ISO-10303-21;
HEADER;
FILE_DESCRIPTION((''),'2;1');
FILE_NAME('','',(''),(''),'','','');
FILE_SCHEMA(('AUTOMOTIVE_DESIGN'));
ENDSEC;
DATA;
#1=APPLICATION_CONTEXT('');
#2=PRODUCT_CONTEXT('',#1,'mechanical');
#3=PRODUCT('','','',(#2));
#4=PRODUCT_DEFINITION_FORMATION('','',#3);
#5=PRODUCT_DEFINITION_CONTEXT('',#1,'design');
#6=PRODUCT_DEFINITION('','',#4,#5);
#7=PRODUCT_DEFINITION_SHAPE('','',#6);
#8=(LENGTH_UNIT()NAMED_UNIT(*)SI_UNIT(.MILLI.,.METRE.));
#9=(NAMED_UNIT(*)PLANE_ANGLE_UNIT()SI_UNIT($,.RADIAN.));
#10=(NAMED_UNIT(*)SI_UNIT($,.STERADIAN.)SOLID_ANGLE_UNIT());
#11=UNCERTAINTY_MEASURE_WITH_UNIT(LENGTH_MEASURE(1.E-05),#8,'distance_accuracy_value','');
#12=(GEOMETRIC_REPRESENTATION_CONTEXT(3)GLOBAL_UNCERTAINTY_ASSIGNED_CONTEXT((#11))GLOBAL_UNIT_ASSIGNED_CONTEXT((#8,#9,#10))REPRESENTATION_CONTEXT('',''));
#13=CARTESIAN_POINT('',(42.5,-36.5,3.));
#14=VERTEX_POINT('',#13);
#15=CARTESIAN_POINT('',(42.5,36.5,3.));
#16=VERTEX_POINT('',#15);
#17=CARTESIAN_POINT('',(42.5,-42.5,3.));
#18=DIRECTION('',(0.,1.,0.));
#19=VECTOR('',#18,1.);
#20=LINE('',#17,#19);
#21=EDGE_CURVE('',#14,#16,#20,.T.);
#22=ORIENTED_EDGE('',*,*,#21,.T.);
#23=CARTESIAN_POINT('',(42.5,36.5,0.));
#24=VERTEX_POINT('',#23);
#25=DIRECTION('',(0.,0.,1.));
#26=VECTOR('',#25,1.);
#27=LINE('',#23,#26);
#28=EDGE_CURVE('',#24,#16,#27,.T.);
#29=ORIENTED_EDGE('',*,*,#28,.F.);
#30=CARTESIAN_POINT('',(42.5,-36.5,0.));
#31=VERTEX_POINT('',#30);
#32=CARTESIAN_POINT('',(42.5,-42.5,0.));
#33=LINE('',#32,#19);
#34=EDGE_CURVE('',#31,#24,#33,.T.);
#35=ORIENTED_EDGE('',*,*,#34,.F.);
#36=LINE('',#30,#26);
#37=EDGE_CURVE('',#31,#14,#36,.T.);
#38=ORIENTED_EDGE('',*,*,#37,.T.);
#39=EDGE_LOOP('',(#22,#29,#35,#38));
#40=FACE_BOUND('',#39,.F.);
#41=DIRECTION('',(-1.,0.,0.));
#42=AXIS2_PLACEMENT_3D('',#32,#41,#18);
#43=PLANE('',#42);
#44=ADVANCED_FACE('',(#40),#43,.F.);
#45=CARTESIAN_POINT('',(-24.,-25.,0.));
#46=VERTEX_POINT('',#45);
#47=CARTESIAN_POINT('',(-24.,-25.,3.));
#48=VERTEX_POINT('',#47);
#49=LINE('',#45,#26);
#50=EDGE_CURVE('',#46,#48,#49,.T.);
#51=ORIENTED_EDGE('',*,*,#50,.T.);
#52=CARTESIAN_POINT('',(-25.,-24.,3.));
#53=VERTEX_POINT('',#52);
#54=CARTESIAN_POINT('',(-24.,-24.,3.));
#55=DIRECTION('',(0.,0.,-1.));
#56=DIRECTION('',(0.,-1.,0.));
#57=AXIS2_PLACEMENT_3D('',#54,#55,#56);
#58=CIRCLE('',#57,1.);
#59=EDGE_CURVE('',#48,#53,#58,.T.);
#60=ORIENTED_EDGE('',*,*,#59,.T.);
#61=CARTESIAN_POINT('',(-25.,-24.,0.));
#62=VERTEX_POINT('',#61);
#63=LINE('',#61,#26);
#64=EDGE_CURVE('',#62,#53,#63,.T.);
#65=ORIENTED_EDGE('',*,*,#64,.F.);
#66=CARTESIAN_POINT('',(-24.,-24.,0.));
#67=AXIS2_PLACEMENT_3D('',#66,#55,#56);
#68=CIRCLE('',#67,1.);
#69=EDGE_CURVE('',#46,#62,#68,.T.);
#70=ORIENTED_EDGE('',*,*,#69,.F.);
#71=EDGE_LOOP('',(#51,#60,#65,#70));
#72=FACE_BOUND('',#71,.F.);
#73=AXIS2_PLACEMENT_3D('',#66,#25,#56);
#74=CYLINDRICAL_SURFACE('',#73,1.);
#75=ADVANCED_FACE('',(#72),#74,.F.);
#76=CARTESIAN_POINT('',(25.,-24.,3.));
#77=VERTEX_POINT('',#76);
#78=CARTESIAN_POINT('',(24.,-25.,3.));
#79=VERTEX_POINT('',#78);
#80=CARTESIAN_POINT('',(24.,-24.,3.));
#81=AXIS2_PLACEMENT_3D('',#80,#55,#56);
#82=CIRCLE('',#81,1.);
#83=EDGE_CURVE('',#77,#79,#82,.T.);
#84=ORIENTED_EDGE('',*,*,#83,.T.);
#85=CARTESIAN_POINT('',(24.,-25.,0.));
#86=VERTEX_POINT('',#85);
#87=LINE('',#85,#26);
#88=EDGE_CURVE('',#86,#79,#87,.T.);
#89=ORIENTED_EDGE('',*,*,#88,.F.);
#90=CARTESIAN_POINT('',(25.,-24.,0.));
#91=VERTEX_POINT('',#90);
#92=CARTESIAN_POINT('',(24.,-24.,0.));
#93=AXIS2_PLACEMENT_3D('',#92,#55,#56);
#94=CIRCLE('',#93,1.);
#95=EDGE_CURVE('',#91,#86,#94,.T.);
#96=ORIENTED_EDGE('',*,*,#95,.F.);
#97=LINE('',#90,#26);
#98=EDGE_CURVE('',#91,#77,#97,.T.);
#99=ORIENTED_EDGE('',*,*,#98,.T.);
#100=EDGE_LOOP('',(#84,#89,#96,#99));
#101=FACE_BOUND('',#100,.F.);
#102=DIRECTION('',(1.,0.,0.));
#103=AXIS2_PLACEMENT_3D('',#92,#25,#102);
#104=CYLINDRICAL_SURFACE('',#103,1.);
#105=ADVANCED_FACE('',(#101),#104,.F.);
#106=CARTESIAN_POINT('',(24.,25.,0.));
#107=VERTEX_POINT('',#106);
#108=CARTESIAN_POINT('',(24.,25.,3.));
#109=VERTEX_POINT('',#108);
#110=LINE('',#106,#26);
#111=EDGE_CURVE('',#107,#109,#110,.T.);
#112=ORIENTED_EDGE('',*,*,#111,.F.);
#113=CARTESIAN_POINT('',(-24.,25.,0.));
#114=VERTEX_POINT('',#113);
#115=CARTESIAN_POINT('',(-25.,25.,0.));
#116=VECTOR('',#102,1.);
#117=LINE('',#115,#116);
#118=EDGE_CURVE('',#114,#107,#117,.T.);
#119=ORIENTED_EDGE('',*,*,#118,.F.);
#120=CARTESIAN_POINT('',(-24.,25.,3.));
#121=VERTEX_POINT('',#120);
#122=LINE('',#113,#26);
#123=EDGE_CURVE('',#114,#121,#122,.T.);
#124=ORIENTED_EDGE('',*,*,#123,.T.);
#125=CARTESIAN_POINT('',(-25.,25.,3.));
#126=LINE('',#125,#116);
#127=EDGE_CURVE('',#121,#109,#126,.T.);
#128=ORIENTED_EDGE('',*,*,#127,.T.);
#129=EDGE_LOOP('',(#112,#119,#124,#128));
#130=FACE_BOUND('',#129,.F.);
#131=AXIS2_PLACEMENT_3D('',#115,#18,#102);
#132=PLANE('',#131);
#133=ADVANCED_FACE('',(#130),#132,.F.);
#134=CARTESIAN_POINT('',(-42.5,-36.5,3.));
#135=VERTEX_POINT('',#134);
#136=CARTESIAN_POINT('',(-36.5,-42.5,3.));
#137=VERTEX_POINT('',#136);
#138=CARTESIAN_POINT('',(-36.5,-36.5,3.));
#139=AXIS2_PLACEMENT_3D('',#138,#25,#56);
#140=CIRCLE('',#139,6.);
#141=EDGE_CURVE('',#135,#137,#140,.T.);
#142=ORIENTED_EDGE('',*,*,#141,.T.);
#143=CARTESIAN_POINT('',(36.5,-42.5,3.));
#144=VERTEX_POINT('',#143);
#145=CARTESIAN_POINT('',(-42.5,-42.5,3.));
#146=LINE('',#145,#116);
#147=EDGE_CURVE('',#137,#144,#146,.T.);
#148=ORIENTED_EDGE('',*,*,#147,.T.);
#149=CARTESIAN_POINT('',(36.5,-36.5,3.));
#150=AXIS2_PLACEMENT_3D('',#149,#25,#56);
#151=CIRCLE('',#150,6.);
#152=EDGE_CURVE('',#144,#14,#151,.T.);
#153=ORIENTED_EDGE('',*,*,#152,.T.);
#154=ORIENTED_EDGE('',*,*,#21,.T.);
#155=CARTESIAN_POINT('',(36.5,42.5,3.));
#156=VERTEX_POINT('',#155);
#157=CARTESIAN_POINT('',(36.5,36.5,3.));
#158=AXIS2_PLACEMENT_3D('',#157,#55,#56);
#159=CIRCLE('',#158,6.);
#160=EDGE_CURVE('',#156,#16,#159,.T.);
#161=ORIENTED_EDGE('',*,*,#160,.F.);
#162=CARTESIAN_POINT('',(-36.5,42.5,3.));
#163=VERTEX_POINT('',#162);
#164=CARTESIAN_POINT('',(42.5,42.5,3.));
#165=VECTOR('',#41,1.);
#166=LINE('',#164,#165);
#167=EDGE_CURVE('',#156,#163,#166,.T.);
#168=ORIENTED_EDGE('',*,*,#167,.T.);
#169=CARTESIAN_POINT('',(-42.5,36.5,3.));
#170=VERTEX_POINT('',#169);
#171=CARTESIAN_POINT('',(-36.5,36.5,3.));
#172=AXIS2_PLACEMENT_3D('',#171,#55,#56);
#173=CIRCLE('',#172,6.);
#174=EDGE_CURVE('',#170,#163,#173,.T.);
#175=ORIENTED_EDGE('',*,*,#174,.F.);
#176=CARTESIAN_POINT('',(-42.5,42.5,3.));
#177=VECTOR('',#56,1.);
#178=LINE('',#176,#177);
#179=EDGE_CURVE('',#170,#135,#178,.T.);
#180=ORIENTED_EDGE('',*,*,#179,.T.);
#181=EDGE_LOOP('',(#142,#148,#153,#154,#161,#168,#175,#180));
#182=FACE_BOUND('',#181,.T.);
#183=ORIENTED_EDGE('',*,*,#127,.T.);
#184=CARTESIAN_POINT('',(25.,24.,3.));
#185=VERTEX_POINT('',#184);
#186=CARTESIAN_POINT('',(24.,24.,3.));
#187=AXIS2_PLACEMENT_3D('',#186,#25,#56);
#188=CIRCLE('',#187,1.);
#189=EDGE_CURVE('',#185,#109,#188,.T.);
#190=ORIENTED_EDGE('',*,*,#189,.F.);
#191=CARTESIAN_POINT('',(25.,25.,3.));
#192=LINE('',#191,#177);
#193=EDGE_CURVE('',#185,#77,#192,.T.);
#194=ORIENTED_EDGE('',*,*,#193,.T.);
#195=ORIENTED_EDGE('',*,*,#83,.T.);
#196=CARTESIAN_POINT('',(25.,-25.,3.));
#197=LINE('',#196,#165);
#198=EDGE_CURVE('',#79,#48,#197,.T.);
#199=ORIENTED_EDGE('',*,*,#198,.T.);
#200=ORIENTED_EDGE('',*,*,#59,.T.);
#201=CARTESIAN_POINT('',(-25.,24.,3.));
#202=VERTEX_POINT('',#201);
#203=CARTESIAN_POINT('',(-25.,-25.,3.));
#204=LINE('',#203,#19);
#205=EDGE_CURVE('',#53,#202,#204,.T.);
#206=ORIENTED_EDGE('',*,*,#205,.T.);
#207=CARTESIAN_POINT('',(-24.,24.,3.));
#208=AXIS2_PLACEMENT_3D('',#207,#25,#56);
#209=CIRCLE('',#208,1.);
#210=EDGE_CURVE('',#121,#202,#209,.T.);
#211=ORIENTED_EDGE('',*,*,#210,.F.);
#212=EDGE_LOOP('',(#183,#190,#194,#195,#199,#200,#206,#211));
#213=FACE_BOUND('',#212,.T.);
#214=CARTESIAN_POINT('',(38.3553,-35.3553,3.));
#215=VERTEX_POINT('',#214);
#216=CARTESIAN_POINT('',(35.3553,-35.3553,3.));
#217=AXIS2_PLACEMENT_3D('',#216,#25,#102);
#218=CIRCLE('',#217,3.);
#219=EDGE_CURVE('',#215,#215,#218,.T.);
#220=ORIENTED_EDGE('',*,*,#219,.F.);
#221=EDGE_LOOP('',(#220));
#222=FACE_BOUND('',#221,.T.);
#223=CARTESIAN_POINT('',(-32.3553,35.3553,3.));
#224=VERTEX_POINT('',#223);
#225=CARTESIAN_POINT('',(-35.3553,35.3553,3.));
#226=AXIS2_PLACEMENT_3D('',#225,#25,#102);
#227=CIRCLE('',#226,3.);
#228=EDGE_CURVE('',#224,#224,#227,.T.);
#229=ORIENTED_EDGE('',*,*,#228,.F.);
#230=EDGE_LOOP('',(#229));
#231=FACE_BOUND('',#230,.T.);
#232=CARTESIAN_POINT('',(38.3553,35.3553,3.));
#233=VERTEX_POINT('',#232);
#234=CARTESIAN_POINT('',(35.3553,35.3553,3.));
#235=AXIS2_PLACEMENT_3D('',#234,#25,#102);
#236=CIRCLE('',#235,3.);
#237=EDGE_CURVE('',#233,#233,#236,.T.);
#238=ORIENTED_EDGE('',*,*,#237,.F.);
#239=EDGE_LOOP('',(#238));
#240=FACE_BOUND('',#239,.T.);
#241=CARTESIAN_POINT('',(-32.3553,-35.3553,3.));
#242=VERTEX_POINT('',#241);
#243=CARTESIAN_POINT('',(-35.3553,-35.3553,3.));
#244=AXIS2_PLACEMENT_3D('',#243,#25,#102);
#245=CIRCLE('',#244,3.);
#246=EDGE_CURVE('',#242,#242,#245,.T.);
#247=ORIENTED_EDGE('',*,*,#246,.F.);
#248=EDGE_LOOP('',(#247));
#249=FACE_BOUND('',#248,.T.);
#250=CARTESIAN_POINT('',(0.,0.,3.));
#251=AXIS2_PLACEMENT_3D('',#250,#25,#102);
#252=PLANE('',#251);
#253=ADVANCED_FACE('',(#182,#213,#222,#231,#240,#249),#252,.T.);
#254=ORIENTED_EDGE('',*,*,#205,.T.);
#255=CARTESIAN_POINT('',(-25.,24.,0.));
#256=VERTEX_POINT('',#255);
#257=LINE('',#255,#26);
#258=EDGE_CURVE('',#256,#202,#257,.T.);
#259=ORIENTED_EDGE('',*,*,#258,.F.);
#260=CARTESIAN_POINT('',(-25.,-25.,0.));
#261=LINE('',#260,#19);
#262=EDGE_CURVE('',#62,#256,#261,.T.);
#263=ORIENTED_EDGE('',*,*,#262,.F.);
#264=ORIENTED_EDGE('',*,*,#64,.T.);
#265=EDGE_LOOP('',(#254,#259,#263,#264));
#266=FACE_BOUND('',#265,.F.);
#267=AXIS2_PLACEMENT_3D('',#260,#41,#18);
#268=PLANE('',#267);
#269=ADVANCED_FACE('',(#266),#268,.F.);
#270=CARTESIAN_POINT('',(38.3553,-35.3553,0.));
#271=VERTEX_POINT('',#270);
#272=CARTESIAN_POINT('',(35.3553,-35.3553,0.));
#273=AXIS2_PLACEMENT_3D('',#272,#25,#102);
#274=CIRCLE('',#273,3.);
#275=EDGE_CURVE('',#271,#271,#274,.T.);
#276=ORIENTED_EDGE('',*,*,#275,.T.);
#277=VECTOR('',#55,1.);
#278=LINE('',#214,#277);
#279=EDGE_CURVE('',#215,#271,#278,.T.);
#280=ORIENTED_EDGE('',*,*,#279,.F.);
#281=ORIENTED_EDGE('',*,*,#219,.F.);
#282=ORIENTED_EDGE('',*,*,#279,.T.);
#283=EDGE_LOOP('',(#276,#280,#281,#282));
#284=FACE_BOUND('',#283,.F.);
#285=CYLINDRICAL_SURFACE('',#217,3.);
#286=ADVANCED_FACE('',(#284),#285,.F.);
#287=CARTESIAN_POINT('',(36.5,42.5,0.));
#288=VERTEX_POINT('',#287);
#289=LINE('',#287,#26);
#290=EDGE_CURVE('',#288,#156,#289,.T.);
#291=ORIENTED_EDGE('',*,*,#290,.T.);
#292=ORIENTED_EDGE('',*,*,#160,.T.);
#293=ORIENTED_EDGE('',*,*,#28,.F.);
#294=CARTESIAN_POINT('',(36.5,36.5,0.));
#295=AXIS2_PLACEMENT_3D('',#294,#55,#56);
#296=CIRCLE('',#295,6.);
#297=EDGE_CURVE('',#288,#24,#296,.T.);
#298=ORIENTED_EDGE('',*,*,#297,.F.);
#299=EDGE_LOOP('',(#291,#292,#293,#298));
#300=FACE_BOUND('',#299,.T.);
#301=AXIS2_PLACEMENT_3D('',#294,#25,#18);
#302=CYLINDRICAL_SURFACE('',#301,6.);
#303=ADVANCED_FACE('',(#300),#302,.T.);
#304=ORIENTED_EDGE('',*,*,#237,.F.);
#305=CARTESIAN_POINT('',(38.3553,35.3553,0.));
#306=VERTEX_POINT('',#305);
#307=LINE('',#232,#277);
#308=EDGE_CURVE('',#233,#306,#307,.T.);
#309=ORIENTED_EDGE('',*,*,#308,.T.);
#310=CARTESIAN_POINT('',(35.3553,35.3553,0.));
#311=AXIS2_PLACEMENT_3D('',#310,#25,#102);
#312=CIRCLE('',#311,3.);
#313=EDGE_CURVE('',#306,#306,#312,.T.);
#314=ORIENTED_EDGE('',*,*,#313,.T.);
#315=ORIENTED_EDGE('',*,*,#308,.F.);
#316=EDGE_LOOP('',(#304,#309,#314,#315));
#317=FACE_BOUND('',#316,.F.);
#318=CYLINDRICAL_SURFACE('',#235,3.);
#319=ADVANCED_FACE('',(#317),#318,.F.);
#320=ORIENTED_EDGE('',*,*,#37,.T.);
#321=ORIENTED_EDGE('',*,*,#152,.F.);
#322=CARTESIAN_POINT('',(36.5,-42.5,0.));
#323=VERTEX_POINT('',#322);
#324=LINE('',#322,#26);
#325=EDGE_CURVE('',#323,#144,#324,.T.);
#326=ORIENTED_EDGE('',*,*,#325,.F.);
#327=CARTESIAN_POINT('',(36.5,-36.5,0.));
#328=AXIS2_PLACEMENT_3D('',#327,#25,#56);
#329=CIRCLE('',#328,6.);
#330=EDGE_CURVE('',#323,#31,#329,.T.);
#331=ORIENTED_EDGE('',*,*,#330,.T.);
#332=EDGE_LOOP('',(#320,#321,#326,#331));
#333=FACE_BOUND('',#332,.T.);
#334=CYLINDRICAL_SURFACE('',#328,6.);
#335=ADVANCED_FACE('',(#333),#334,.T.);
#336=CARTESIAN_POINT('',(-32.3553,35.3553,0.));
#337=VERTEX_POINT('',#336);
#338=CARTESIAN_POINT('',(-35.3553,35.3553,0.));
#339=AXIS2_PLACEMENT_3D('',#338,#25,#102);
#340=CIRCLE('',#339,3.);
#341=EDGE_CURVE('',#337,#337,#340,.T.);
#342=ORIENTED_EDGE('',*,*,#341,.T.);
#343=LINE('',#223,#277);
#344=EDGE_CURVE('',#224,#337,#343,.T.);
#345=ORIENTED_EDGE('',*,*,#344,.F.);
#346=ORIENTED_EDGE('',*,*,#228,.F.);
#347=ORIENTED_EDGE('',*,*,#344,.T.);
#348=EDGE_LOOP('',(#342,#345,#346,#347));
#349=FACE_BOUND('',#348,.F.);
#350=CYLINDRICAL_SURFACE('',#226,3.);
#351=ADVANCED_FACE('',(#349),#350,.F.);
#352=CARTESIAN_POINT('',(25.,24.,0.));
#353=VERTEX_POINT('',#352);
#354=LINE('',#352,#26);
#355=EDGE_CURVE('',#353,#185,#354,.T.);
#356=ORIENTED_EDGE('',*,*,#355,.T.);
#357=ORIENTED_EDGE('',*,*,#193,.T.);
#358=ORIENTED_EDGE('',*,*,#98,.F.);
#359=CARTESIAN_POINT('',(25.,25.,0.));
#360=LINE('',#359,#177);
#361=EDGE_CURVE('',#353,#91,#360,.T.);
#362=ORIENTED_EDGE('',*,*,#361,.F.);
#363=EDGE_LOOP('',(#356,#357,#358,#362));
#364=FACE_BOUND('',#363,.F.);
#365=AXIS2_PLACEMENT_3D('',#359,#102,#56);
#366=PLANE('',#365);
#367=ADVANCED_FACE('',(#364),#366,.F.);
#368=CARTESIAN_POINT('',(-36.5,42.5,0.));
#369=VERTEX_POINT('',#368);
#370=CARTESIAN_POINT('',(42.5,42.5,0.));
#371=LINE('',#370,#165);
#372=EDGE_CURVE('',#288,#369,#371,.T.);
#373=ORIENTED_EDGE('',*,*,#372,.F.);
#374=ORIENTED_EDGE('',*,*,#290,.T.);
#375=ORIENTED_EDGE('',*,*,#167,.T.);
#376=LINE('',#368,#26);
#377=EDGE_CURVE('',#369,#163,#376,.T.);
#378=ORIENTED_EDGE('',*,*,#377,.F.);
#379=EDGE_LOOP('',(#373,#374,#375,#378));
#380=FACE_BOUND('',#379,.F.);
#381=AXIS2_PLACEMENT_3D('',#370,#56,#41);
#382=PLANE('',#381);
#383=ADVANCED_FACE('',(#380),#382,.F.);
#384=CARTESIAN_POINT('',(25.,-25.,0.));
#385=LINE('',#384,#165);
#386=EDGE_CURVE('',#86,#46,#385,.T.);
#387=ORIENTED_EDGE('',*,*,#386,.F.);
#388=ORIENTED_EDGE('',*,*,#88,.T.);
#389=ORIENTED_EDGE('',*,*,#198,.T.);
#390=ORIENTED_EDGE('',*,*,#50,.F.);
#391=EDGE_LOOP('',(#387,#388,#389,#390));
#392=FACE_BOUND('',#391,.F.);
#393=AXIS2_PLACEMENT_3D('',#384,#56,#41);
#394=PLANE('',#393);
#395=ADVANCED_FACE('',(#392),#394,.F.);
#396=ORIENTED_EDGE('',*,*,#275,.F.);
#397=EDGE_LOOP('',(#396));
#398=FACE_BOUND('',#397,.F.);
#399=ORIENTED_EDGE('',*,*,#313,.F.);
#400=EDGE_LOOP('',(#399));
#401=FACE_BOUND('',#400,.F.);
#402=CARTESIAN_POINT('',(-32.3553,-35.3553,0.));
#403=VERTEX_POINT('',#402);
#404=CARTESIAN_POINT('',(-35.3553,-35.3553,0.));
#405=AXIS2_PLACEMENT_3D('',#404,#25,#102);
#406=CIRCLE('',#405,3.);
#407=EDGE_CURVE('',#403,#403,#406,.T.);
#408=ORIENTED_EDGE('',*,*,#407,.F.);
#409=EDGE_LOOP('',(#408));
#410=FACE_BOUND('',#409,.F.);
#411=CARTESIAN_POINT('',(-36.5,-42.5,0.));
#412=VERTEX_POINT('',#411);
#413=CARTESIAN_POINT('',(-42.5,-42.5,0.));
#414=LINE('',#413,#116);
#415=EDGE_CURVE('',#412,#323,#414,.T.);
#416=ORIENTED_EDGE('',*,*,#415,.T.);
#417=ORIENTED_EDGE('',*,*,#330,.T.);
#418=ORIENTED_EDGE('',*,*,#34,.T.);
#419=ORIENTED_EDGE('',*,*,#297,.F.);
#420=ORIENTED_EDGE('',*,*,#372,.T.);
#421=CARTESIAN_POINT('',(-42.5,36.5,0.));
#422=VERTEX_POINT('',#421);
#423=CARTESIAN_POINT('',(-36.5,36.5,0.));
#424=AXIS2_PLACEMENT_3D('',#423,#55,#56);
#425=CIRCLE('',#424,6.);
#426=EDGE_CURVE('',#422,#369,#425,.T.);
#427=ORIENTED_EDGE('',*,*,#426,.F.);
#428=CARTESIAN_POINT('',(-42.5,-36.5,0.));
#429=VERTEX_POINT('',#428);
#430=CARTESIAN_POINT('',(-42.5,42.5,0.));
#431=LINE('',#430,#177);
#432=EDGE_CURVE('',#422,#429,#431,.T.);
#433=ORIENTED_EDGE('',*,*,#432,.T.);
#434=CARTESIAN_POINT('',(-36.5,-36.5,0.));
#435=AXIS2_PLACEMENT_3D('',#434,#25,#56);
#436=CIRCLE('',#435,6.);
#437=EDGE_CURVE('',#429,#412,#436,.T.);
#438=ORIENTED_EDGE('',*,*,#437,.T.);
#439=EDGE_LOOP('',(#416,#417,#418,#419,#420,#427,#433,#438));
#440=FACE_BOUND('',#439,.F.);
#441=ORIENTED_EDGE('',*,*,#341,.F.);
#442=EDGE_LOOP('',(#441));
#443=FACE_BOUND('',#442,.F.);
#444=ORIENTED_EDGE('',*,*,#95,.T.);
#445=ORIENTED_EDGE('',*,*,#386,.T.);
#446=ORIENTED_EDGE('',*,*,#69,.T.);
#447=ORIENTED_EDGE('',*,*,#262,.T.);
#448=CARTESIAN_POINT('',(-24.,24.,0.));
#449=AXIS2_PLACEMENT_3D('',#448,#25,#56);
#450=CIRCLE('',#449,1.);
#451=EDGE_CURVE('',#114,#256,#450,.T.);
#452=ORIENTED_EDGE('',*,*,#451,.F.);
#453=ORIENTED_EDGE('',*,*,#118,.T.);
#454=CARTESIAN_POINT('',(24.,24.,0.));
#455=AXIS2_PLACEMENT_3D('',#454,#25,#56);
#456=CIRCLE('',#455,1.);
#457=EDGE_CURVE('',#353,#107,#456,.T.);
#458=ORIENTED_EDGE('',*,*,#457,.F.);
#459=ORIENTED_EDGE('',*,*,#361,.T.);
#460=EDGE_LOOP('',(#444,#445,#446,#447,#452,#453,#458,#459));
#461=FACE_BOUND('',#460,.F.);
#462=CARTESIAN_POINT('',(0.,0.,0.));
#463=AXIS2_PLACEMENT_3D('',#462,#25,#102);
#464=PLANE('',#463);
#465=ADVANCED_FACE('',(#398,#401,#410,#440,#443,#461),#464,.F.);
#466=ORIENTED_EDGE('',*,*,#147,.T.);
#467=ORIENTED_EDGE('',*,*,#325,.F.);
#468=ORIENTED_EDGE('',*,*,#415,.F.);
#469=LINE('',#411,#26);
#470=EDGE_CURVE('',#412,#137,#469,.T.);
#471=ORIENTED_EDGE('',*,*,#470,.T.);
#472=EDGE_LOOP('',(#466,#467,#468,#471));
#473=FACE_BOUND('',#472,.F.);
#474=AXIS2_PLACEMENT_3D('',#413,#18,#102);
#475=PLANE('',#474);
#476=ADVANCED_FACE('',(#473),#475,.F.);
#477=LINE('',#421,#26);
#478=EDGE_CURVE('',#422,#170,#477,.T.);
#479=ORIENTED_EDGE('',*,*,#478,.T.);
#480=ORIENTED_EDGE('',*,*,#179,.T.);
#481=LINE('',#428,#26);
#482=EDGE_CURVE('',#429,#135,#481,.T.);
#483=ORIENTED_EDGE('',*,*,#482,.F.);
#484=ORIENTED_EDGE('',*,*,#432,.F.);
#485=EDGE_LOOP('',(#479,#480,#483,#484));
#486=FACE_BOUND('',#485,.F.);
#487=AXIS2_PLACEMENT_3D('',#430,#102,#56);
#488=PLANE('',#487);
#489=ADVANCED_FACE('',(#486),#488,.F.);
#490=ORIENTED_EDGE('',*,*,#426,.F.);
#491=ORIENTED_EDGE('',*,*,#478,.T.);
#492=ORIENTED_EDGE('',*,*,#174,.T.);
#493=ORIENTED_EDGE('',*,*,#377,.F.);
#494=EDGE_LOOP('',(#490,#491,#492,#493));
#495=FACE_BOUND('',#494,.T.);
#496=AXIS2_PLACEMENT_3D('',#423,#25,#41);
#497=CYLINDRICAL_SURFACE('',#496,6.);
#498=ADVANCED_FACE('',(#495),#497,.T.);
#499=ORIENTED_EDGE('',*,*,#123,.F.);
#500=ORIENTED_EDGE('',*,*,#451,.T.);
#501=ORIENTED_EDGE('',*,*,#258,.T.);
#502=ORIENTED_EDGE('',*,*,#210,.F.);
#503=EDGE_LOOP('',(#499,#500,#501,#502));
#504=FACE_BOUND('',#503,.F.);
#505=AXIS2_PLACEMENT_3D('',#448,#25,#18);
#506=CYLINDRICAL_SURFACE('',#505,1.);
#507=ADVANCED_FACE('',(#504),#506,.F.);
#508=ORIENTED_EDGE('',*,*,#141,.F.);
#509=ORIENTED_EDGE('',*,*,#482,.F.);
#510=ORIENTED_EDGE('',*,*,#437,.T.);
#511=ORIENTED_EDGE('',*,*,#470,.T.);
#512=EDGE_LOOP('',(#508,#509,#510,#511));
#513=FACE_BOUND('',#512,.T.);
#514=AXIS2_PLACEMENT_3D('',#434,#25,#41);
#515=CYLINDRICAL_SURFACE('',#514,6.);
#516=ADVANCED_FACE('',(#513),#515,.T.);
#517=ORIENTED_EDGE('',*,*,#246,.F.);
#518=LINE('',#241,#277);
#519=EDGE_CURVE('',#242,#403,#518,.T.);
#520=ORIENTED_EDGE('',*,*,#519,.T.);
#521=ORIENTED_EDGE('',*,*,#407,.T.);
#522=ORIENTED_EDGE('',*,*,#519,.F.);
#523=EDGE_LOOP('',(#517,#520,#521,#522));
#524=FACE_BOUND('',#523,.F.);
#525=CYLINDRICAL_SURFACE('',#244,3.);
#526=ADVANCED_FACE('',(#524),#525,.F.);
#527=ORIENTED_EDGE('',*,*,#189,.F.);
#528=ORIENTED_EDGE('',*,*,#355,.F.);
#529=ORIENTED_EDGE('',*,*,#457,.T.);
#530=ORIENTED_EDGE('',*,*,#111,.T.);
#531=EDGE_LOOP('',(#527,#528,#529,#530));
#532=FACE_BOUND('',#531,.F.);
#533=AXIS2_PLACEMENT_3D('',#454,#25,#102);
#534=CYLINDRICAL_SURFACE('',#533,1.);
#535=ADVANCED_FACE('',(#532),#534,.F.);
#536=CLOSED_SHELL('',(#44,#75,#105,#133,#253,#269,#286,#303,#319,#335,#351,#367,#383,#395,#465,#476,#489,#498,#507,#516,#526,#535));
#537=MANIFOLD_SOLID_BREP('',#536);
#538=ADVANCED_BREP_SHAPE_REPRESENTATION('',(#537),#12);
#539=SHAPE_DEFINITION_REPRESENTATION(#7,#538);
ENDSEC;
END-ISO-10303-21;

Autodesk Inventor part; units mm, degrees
ref_plane "YZ Plane" through (0, 0, 0) normal (1, 0, 0) x (0, 1, 0)
ref_plane "XZ Plane" through (0, 0, 0) normal (0, 1, 0) x (-1, 0, 0)
ref_plane "XY Plane" through (0, 0, 0) normal (0, 0, 1) x (1, 0, 0)
sketch "Sketch1" plane through (0, 0, 0) normal (0, 0, 1) x (1, 0, 0)
  line L0 (-42.5, -42.5) -> (42.5, -42.5)
  line L1 (42.5, -42.5) -> (42.5, 42.5)
  line L2 (42.5, 42.5) -> (-42.5, 42.5)
  line L3 (-42.5, 42.5) -> (-42.5, -42.5)
  line L4 (-42.5, -42.5) -> (42.5, 42.5) construction
  line L5 (42.5, -42.5) -> (-42.5, 42.5) construction
  line L6 (25, -25) -> (-25, -25)
  line L7 (-25, -25) -> (-25, 25)
  line L8 (-25, 25) -> (25, 25)
  line L9 (25, 25) -> (25, -25)
  line L10 (25, -25) -> (-25, 25) construction
  line L11 (-25, -25) -> (25, 25) construction
  point P0 (0, 0)
  dimension "d154" = 85
  dimension "d155" = 85
  dimension "d172" = 50
extrude "Plate5" add sketch "Sketch1" along normal blind 3
sketch "Sketch9" plane through (0, 0, 3) normal (0, 0, 1) x (1, 0, 0)
  circle A0 centre (35.3553, -35.3553) radius 3
  line L0 (35.3553, 35.3553) -> (-35.3553, 35.3553) construction
  line L1 (-35.3553, 35.3553) -> (-35.3553, -35.3553) construction
  line L2 (-35.3553, -35.3553) -> (35.3553, -35.3553) construction
  line L3 (35.3553, -35.3553) -> (35.3553, 35.3553) construction
  line L4 (35.3553, 35.3553) -> (-35.3553, -35.3553) construction
  line L5 (-35.3553, 35.3553) -> (35.3553, -35.3553) construction
  circle A1 centre (-35.3553, -35.3553) radius 3
  circle A2 centre (35.3553, 35.3553) radius 3
  circle A3 centre (-35.3553, 35.3553) radius 3
  circle A4 centre (0, 0) radius 50 construction
  dimension "d180" = 100
  dimension "d174" = 6
extrude "Cut2" cut sketch "Sketch9" against normal blind 3
fillet "Corner Round1" radius 6 4 edges at (42.5, 42.5, 1.5) (-42.5, 42.5, 1.5) (-42.5, -42.5, 1.5) (42.5, -42.5, 1.5)
fillet "Corner Round2" radius 1 4 edges at (-25, 25, 1.5) (-25, -25, 1.5) (25, -25, 1.5) (25, 25, 1.5)
properties part number "TKS 3531 FDS Way FLANGE" material "Stainless Steel"
